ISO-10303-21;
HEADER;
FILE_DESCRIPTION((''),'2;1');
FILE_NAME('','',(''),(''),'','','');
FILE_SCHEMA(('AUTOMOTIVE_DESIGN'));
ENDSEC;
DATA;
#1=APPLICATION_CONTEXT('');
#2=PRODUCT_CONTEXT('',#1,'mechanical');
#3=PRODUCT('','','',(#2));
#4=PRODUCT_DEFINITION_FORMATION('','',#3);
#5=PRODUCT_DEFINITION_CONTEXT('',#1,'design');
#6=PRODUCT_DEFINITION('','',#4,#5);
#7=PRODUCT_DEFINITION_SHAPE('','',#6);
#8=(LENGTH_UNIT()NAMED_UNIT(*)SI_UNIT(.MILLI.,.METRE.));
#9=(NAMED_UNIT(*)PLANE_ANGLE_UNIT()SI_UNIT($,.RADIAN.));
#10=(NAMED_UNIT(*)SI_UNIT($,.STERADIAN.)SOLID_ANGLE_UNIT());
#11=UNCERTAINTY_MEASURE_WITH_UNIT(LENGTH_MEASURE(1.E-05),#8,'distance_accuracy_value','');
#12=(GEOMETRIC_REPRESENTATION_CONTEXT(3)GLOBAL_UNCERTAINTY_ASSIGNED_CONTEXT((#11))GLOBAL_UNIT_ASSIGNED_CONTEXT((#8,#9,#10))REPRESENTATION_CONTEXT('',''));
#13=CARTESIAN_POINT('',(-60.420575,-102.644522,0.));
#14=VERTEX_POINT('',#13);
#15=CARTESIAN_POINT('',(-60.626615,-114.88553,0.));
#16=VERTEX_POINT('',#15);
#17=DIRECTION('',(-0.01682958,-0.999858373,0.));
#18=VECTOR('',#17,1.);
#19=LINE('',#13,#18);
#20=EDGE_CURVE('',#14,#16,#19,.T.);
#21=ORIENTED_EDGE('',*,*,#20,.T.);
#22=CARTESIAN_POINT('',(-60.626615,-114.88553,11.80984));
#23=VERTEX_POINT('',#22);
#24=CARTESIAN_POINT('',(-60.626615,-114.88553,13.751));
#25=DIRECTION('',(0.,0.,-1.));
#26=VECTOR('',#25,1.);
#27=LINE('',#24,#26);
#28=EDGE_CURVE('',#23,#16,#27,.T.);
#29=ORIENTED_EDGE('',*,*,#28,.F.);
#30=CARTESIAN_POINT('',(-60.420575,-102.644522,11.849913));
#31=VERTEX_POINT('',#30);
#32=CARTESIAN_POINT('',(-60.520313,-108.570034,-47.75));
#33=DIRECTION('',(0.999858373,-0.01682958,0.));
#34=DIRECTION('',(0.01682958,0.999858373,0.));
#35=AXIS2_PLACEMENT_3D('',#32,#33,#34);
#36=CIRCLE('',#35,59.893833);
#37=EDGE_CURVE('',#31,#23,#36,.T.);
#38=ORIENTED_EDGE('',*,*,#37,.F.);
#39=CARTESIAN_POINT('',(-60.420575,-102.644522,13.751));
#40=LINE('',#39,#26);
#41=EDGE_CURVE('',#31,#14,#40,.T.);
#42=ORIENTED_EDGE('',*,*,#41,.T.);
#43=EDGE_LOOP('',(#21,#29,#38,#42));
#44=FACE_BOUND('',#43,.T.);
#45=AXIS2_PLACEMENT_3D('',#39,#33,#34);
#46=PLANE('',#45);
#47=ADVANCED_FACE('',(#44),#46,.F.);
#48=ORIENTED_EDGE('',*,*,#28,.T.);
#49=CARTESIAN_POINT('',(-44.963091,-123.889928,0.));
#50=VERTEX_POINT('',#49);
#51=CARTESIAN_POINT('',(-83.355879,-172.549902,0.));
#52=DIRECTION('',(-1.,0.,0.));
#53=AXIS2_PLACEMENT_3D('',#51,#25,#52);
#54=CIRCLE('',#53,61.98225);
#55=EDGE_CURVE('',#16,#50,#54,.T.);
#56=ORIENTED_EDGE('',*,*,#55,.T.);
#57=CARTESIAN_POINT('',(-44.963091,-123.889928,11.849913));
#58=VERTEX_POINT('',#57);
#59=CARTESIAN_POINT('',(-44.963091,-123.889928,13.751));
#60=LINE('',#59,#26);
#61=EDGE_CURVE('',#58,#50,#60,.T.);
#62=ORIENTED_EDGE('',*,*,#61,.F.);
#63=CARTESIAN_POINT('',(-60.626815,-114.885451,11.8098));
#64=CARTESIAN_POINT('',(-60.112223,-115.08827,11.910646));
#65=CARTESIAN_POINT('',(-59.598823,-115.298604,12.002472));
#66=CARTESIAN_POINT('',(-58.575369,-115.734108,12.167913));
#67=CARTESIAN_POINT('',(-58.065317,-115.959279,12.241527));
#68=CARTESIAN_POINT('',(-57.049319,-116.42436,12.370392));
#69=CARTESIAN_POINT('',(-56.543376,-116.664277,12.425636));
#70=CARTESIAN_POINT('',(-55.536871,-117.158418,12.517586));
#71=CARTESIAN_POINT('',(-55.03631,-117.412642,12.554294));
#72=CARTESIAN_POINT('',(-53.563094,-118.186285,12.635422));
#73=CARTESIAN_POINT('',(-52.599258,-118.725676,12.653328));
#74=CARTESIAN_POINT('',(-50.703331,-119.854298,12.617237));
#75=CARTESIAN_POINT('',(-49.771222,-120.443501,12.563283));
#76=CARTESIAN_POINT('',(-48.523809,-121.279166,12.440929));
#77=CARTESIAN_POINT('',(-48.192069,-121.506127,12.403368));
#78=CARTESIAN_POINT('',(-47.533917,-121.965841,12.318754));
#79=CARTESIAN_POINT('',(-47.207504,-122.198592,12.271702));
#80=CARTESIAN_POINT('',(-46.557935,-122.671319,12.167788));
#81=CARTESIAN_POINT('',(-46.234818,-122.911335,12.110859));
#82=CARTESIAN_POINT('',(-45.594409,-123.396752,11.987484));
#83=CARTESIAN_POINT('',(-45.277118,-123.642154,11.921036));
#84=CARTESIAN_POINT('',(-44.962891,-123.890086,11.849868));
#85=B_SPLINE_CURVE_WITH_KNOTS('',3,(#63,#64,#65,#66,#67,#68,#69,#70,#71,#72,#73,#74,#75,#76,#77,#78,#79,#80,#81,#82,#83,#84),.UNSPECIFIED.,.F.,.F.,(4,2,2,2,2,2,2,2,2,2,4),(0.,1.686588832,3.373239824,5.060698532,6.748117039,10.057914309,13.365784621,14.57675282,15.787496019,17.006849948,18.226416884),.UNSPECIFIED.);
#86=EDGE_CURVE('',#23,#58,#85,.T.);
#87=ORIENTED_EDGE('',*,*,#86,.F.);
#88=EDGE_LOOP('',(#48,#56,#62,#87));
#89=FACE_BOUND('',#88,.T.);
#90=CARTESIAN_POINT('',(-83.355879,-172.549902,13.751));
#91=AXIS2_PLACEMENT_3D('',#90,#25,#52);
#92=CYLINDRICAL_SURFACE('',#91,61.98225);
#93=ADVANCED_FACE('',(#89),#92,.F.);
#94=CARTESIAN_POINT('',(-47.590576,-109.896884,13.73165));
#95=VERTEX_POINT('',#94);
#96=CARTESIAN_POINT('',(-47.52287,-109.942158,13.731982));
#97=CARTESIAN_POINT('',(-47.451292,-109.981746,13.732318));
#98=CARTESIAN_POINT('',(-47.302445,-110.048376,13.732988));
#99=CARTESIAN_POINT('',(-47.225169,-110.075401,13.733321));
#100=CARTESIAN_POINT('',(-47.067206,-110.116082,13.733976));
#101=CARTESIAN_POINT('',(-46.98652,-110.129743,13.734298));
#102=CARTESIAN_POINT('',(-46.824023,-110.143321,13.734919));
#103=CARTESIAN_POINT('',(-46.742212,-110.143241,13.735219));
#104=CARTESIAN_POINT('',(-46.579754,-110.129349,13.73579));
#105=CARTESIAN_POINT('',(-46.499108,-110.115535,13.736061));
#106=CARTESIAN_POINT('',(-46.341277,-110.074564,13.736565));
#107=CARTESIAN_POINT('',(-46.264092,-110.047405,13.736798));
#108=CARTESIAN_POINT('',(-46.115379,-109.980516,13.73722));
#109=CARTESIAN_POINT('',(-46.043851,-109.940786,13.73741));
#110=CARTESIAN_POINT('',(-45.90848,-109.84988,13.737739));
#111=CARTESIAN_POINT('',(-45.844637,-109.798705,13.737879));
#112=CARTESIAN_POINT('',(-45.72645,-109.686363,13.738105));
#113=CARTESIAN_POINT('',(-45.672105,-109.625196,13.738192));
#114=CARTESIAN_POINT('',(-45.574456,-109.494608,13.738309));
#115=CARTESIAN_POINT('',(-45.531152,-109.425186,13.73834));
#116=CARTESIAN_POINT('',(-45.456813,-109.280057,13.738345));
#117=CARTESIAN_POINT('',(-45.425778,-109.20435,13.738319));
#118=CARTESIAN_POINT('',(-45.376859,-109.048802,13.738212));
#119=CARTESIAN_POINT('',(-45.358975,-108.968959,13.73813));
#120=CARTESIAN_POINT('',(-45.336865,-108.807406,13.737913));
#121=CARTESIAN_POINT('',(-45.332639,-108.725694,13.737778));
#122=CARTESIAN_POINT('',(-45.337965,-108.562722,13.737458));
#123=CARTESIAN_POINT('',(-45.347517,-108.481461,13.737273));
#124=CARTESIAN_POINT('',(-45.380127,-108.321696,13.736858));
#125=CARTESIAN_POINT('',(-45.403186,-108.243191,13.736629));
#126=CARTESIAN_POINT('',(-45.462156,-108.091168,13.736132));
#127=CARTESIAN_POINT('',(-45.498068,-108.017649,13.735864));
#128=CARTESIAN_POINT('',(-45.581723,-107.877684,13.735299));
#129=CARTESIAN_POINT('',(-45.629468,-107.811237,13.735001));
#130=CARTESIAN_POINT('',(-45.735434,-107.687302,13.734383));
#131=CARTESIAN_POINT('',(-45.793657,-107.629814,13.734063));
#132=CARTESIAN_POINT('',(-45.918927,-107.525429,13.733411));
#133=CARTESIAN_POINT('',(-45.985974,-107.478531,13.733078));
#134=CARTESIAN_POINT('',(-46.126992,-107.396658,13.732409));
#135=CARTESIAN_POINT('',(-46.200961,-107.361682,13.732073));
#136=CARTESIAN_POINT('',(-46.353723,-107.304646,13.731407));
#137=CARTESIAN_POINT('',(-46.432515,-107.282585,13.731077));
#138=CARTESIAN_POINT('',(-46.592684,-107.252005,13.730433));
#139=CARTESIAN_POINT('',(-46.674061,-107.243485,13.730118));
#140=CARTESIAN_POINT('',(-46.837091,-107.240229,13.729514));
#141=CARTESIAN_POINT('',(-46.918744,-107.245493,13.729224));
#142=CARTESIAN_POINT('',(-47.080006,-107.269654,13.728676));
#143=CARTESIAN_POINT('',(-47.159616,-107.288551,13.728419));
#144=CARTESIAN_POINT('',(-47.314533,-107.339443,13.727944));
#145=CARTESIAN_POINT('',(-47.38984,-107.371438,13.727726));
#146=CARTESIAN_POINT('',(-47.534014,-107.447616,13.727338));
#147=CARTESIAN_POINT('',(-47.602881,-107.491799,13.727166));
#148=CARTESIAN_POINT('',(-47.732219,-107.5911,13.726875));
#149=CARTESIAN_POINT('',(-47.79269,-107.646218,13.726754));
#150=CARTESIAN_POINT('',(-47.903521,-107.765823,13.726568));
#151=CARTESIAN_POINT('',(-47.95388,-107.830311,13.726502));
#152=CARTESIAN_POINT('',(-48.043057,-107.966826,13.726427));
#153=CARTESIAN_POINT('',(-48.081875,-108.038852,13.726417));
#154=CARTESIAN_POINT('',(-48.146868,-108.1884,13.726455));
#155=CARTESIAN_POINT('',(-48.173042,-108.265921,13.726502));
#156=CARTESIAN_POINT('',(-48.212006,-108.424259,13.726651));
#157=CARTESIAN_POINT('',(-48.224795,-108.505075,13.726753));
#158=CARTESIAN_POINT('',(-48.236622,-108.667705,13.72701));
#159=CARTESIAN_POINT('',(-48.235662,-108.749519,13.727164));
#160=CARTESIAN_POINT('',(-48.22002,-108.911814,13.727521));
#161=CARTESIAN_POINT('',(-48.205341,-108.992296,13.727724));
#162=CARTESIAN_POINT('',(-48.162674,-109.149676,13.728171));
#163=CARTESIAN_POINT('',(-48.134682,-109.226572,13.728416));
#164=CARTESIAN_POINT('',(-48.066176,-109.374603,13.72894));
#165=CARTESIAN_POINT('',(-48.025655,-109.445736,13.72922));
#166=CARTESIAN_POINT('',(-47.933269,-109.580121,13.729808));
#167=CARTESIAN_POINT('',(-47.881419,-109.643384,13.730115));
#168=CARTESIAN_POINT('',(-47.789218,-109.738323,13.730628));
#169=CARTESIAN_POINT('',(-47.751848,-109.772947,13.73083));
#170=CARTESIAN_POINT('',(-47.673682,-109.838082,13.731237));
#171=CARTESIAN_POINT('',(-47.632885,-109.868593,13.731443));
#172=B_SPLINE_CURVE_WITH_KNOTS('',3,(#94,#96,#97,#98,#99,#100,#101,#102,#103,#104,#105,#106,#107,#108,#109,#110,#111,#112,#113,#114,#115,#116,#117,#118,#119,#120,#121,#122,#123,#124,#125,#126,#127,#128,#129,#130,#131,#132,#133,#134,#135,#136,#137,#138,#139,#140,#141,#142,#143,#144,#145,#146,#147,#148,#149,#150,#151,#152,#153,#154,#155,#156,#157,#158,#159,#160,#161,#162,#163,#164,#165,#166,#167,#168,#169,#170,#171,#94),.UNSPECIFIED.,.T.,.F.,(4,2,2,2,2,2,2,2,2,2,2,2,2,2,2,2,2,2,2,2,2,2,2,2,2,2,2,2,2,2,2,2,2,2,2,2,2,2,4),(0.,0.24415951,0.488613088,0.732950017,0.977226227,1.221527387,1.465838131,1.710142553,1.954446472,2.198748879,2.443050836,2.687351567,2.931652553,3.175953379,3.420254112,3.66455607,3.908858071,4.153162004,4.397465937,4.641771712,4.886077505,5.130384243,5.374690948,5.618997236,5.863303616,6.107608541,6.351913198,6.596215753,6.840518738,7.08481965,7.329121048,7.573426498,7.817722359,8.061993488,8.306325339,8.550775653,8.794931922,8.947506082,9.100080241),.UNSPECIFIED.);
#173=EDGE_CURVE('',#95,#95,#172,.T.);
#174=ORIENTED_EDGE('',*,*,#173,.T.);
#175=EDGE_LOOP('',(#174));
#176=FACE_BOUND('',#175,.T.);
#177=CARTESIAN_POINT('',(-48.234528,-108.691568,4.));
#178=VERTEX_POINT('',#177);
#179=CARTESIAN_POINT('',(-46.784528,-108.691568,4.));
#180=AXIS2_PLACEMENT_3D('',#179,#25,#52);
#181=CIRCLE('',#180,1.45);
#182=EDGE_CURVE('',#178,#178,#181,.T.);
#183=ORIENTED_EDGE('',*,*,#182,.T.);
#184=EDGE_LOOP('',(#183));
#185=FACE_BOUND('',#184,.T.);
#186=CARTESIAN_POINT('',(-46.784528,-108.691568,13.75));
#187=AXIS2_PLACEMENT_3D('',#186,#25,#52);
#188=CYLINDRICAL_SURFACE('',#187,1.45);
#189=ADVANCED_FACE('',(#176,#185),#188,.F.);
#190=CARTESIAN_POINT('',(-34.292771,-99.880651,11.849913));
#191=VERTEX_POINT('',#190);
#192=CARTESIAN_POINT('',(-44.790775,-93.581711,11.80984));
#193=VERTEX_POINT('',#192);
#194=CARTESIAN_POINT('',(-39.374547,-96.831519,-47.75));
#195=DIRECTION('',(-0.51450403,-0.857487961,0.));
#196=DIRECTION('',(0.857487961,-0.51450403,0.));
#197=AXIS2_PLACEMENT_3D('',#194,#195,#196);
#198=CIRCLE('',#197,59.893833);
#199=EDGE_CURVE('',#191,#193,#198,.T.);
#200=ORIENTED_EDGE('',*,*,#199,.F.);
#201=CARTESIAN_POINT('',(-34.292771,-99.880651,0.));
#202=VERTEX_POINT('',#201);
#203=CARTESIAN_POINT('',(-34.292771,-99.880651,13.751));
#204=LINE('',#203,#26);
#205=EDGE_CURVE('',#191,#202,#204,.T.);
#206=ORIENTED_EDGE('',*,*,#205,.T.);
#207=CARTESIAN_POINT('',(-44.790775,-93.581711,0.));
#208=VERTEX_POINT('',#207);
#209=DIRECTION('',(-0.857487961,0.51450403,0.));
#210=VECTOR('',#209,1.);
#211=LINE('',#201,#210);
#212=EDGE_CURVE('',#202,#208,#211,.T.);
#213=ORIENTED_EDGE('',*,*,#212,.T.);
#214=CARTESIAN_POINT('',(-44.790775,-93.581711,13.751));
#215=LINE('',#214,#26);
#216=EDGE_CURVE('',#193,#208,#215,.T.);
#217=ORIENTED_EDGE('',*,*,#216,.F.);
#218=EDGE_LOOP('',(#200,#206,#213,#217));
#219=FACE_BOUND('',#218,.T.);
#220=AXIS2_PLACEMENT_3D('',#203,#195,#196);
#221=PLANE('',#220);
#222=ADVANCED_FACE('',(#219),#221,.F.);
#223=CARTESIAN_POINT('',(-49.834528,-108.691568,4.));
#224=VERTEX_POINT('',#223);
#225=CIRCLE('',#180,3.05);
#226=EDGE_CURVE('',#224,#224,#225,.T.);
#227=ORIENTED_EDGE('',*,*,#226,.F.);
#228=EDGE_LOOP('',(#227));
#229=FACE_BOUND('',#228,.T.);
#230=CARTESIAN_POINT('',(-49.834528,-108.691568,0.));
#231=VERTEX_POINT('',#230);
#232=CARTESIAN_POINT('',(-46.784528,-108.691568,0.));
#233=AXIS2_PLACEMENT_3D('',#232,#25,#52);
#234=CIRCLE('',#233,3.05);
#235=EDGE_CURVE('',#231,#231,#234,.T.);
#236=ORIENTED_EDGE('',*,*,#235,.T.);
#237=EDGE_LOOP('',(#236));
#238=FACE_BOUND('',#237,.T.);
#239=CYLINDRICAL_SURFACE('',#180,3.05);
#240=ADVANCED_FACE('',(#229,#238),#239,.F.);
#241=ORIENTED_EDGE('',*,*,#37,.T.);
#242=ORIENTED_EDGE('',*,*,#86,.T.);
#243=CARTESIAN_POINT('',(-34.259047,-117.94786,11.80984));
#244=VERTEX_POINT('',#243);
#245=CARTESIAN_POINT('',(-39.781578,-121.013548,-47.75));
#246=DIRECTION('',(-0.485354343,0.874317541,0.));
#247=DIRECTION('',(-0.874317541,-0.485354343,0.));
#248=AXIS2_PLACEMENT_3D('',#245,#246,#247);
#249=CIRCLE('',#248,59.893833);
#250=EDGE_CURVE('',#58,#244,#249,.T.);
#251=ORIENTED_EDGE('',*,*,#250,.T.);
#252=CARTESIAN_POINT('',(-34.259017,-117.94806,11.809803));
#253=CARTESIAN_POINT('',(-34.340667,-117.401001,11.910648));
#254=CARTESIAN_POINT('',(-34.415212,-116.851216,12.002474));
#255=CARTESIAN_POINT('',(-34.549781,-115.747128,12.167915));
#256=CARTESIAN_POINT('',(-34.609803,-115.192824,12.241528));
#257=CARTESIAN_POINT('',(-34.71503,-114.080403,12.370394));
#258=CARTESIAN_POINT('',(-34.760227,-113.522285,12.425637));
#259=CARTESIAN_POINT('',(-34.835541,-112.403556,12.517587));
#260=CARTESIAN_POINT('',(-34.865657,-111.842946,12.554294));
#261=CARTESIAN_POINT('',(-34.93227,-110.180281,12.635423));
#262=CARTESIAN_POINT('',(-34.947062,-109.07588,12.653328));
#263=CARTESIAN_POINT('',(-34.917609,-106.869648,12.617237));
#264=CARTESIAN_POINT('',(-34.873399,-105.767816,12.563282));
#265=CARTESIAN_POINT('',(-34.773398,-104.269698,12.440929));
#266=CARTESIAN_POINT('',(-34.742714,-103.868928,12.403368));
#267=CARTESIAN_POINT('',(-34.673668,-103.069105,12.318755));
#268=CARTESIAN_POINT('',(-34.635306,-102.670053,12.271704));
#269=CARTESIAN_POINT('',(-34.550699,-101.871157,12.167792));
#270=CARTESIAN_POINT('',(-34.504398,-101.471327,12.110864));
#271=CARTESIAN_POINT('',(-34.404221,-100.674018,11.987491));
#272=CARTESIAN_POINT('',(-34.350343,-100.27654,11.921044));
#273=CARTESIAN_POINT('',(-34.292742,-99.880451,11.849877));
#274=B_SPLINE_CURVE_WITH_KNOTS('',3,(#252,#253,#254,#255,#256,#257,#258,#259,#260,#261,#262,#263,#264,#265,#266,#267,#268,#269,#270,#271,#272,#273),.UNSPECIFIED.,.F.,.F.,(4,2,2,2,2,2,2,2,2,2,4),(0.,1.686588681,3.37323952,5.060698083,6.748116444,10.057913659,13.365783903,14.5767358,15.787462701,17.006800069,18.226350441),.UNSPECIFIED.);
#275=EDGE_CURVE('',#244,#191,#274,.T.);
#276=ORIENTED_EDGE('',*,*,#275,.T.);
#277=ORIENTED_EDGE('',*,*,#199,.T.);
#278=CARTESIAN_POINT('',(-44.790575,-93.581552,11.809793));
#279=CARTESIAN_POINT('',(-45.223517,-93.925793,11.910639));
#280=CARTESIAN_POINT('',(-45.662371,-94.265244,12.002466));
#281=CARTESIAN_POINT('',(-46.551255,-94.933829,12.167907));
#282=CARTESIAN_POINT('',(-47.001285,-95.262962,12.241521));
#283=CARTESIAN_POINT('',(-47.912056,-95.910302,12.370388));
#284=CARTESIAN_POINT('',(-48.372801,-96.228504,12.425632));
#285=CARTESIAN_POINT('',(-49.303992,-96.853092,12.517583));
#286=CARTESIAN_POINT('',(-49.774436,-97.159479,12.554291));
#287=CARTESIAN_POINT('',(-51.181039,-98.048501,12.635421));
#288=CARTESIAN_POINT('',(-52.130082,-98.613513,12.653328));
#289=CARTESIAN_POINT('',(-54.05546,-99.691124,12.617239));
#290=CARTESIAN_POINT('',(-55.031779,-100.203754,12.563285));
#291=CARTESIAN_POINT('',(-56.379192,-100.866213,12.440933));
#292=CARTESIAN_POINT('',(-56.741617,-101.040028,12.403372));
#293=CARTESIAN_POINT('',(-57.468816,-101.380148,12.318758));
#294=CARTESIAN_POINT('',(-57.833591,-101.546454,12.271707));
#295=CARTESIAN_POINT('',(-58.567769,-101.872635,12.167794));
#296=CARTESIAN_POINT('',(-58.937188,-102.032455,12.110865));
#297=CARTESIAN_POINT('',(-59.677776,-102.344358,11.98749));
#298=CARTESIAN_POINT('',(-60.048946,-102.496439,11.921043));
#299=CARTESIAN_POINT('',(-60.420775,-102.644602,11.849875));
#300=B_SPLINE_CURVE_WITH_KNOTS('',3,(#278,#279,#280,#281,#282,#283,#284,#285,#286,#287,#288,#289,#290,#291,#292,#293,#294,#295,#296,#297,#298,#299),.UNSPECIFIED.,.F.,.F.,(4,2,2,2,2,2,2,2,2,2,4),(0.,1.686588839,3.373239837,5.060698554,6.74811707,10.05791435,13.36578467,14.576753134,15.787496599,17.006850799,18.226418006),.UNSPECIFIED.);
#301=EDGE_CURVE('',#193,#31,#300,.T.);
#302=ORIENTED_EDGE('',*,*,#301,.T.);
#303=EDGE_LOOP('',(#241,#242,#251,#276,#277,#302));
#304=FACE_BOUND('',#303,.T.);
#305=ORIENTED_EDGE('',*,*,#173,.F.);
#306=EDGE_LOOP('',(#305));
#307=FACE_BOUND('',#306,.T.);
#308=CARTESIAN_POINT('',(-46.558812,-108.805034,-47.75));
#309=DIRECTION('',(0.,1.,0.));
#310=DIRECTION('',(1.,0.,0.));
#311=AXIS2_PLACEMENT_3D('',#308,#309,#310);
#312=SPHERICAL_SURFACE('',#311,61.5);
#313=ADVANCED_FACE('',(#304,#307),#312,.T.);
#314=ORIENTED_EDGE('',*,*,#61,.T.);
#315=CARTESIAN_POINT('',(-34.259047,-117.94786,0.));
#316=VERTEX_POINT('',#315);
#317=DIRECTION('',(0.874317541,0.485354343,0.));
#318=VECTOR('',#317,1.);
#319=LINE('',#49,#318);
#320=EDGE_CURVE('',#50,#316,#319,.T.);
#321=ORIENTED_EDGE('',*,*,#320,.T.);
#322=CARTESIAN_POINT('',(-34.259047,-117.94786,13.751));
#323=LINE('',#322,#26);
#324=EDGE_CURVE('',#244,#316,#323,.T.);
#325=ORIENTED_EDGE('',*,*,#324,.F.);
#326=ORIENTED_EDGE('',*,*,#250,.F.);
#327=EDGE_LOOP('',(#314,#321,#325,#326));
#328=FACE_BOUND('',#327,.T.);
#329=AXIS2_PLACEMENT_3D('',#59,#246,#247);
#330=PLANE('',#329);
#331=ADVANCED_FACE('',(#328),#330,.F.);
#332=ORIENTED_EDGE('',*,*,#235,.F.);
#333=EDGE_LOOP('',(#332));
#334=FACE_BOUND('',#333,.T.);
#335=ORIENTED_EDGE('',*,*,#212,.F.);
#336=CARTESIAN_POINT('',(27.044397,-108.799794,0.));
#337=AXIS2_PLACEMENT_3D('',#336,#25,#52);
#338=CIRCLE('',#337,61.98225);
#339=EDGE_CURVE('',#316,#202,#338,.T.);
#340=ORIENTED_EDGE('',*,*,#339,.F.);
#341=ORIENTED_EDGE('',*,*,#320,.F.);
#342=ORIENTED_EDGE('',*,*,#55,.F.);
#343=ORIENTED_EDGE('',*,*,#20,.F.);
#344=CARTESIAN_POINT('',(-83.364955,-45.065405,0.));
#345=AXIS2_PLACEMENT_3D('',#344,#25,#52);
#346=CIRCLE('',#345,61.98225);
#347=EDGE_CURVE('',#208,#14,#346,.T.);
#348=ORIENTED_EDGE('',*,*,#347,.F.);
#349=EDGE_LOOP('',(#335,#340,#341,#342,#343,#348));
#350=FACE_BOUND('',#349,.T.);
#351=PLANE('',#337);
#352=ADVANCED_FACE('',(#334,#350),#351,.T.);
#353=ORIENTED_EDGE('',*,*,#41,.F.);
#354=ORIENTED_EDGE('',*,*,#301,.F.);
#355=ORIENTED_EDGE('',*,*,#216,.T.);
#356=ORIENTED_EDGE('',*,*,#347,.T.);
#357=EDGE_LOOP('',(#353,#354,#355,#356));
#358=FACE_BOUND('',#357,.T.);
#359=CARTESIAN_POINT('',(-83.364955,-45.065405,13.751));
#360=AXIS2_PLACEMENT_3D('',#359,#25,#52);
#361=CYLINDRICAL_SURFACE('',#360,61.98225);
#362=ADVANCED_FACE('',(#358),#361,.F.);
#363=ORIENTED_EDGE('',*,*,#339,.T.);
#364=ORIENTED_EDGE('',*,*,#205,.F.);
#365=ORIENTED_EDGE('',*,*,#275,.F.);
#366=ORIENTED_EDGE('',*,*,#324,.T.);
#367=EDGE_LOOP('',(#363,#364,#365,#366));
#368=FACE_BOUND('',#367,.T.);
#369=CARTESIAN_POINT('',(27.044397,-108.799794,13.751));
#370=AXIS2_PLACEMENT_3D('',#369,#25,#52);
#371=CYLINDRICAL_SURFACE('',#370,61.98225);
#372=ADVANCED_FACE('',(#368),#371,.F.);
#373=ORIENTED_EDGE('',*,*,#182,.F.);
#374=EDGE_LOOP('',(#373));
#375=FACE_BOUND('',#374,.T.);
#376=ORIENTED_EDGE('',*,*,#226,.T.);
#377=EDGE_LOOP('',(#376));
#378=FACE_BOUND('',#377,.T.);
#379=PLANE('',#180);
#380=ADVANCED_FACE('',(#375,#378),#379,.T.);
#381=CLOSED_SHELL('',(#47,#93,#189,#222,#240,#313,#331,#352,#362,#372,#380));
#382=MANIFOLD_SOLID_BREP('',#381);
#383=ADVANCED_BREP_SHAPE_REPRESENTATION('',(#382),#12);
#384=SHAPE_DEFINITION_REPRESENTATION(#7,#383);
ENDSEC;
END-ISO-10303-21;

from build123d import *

# Parameters (mm, degrees)
BOSS_EXTRUDE1_DEPTH = 13.75
SKETCH4_R           = 3.05
CUT_EXTRUDE1_DEPTH  = 4
SKETCH5_R           = 1.45
CUT_EXTRUDE2_DEPTH  = 139.272786048


with BuildPart() as part:
    # Boss-Extrude1: read off the stored shape, not the designer's step
    # Boss-Extrude1 outline → Boss-Extrude1 (new body)
    with BuildSketch(Plane.XY):
        with BuildLine():
            Line((-44.963090762, -123.889928328), (-34.25904674, -117.947860363))
            ThreePointArc((-34.25904674, -117.947860363), (-34.937745159, -108.915491102), (-34.292771341, -99.880651048))
            Line((-34.292771341, -99.880651048), (-44.790775161, -93.581710984))
            ThreePointArc((-44.790775161, -93.581710984), (-52.273687189, -98.685665687), (-60.420575103, -102.644522003))
            Line((-60.420575103, -102.644522003), (-60.626615305, -114.885530032))
            ThreePointArc((-60.626615305, -114.885530032), (-52.465004859, -118.81394459), (-44.963090762, -123.889928328))
        make_face()
    extrude(amount=BOSS_EXTRUDE1_DEPTH)

    # Boss-Extrude1 2 outline → Boss-Extrude1 2 (revolve, cut)
    with BuildSketch(Plane(origin=(-46.558812402, -108.805033793, 0), x_dir=(1, 0, 0), z_dir=(0, -1, 0))):
        with BuildLine():
            ThreePointArc((0, 13.75), (7.723984527, 13.263031911), (15.32564925, 11.809839448))
            Line((15.32564925, 11.809839448), (15.32564925, 13.75))
            Line((15.32564925, 13.75), (0, 13.75))
        make_face()
    revolve(axis=Axis((-46.558812402, -108.805033793, 0), (0, 0, 1)), mode=Mode.SUBTRACT)

    # Sketch4 → Cut-Extrude1 (cut)
    with BuildSketch(Plane(origin=(0, 0, 0), x_dir=(-1, 0, 0), z_dir=(0, 0, -1))):
        with Locations((46.784528167, -108.691568131)):
            Circle(SKETCH4_R)
    extrude(amount=-CUT_EXTRUDE1_DEPTH, mode=Mode.SUBTRACT)

    # Sketch5 → Cut-Extrude2 (cut, through all)
    with BuildSketch(Plane(origin=(0, 0, 4), x_dir=(-1, 0, 0), z_dir=(0, 0, -1))):
        with Locations((46.784528167, -108.691568131)):
            Circle(SKETCH5_R)
    extrude(amount=-CUT_EXTRUDE2_DEPTH, mode=Mode.SUBTRACT)


solid = part.part
